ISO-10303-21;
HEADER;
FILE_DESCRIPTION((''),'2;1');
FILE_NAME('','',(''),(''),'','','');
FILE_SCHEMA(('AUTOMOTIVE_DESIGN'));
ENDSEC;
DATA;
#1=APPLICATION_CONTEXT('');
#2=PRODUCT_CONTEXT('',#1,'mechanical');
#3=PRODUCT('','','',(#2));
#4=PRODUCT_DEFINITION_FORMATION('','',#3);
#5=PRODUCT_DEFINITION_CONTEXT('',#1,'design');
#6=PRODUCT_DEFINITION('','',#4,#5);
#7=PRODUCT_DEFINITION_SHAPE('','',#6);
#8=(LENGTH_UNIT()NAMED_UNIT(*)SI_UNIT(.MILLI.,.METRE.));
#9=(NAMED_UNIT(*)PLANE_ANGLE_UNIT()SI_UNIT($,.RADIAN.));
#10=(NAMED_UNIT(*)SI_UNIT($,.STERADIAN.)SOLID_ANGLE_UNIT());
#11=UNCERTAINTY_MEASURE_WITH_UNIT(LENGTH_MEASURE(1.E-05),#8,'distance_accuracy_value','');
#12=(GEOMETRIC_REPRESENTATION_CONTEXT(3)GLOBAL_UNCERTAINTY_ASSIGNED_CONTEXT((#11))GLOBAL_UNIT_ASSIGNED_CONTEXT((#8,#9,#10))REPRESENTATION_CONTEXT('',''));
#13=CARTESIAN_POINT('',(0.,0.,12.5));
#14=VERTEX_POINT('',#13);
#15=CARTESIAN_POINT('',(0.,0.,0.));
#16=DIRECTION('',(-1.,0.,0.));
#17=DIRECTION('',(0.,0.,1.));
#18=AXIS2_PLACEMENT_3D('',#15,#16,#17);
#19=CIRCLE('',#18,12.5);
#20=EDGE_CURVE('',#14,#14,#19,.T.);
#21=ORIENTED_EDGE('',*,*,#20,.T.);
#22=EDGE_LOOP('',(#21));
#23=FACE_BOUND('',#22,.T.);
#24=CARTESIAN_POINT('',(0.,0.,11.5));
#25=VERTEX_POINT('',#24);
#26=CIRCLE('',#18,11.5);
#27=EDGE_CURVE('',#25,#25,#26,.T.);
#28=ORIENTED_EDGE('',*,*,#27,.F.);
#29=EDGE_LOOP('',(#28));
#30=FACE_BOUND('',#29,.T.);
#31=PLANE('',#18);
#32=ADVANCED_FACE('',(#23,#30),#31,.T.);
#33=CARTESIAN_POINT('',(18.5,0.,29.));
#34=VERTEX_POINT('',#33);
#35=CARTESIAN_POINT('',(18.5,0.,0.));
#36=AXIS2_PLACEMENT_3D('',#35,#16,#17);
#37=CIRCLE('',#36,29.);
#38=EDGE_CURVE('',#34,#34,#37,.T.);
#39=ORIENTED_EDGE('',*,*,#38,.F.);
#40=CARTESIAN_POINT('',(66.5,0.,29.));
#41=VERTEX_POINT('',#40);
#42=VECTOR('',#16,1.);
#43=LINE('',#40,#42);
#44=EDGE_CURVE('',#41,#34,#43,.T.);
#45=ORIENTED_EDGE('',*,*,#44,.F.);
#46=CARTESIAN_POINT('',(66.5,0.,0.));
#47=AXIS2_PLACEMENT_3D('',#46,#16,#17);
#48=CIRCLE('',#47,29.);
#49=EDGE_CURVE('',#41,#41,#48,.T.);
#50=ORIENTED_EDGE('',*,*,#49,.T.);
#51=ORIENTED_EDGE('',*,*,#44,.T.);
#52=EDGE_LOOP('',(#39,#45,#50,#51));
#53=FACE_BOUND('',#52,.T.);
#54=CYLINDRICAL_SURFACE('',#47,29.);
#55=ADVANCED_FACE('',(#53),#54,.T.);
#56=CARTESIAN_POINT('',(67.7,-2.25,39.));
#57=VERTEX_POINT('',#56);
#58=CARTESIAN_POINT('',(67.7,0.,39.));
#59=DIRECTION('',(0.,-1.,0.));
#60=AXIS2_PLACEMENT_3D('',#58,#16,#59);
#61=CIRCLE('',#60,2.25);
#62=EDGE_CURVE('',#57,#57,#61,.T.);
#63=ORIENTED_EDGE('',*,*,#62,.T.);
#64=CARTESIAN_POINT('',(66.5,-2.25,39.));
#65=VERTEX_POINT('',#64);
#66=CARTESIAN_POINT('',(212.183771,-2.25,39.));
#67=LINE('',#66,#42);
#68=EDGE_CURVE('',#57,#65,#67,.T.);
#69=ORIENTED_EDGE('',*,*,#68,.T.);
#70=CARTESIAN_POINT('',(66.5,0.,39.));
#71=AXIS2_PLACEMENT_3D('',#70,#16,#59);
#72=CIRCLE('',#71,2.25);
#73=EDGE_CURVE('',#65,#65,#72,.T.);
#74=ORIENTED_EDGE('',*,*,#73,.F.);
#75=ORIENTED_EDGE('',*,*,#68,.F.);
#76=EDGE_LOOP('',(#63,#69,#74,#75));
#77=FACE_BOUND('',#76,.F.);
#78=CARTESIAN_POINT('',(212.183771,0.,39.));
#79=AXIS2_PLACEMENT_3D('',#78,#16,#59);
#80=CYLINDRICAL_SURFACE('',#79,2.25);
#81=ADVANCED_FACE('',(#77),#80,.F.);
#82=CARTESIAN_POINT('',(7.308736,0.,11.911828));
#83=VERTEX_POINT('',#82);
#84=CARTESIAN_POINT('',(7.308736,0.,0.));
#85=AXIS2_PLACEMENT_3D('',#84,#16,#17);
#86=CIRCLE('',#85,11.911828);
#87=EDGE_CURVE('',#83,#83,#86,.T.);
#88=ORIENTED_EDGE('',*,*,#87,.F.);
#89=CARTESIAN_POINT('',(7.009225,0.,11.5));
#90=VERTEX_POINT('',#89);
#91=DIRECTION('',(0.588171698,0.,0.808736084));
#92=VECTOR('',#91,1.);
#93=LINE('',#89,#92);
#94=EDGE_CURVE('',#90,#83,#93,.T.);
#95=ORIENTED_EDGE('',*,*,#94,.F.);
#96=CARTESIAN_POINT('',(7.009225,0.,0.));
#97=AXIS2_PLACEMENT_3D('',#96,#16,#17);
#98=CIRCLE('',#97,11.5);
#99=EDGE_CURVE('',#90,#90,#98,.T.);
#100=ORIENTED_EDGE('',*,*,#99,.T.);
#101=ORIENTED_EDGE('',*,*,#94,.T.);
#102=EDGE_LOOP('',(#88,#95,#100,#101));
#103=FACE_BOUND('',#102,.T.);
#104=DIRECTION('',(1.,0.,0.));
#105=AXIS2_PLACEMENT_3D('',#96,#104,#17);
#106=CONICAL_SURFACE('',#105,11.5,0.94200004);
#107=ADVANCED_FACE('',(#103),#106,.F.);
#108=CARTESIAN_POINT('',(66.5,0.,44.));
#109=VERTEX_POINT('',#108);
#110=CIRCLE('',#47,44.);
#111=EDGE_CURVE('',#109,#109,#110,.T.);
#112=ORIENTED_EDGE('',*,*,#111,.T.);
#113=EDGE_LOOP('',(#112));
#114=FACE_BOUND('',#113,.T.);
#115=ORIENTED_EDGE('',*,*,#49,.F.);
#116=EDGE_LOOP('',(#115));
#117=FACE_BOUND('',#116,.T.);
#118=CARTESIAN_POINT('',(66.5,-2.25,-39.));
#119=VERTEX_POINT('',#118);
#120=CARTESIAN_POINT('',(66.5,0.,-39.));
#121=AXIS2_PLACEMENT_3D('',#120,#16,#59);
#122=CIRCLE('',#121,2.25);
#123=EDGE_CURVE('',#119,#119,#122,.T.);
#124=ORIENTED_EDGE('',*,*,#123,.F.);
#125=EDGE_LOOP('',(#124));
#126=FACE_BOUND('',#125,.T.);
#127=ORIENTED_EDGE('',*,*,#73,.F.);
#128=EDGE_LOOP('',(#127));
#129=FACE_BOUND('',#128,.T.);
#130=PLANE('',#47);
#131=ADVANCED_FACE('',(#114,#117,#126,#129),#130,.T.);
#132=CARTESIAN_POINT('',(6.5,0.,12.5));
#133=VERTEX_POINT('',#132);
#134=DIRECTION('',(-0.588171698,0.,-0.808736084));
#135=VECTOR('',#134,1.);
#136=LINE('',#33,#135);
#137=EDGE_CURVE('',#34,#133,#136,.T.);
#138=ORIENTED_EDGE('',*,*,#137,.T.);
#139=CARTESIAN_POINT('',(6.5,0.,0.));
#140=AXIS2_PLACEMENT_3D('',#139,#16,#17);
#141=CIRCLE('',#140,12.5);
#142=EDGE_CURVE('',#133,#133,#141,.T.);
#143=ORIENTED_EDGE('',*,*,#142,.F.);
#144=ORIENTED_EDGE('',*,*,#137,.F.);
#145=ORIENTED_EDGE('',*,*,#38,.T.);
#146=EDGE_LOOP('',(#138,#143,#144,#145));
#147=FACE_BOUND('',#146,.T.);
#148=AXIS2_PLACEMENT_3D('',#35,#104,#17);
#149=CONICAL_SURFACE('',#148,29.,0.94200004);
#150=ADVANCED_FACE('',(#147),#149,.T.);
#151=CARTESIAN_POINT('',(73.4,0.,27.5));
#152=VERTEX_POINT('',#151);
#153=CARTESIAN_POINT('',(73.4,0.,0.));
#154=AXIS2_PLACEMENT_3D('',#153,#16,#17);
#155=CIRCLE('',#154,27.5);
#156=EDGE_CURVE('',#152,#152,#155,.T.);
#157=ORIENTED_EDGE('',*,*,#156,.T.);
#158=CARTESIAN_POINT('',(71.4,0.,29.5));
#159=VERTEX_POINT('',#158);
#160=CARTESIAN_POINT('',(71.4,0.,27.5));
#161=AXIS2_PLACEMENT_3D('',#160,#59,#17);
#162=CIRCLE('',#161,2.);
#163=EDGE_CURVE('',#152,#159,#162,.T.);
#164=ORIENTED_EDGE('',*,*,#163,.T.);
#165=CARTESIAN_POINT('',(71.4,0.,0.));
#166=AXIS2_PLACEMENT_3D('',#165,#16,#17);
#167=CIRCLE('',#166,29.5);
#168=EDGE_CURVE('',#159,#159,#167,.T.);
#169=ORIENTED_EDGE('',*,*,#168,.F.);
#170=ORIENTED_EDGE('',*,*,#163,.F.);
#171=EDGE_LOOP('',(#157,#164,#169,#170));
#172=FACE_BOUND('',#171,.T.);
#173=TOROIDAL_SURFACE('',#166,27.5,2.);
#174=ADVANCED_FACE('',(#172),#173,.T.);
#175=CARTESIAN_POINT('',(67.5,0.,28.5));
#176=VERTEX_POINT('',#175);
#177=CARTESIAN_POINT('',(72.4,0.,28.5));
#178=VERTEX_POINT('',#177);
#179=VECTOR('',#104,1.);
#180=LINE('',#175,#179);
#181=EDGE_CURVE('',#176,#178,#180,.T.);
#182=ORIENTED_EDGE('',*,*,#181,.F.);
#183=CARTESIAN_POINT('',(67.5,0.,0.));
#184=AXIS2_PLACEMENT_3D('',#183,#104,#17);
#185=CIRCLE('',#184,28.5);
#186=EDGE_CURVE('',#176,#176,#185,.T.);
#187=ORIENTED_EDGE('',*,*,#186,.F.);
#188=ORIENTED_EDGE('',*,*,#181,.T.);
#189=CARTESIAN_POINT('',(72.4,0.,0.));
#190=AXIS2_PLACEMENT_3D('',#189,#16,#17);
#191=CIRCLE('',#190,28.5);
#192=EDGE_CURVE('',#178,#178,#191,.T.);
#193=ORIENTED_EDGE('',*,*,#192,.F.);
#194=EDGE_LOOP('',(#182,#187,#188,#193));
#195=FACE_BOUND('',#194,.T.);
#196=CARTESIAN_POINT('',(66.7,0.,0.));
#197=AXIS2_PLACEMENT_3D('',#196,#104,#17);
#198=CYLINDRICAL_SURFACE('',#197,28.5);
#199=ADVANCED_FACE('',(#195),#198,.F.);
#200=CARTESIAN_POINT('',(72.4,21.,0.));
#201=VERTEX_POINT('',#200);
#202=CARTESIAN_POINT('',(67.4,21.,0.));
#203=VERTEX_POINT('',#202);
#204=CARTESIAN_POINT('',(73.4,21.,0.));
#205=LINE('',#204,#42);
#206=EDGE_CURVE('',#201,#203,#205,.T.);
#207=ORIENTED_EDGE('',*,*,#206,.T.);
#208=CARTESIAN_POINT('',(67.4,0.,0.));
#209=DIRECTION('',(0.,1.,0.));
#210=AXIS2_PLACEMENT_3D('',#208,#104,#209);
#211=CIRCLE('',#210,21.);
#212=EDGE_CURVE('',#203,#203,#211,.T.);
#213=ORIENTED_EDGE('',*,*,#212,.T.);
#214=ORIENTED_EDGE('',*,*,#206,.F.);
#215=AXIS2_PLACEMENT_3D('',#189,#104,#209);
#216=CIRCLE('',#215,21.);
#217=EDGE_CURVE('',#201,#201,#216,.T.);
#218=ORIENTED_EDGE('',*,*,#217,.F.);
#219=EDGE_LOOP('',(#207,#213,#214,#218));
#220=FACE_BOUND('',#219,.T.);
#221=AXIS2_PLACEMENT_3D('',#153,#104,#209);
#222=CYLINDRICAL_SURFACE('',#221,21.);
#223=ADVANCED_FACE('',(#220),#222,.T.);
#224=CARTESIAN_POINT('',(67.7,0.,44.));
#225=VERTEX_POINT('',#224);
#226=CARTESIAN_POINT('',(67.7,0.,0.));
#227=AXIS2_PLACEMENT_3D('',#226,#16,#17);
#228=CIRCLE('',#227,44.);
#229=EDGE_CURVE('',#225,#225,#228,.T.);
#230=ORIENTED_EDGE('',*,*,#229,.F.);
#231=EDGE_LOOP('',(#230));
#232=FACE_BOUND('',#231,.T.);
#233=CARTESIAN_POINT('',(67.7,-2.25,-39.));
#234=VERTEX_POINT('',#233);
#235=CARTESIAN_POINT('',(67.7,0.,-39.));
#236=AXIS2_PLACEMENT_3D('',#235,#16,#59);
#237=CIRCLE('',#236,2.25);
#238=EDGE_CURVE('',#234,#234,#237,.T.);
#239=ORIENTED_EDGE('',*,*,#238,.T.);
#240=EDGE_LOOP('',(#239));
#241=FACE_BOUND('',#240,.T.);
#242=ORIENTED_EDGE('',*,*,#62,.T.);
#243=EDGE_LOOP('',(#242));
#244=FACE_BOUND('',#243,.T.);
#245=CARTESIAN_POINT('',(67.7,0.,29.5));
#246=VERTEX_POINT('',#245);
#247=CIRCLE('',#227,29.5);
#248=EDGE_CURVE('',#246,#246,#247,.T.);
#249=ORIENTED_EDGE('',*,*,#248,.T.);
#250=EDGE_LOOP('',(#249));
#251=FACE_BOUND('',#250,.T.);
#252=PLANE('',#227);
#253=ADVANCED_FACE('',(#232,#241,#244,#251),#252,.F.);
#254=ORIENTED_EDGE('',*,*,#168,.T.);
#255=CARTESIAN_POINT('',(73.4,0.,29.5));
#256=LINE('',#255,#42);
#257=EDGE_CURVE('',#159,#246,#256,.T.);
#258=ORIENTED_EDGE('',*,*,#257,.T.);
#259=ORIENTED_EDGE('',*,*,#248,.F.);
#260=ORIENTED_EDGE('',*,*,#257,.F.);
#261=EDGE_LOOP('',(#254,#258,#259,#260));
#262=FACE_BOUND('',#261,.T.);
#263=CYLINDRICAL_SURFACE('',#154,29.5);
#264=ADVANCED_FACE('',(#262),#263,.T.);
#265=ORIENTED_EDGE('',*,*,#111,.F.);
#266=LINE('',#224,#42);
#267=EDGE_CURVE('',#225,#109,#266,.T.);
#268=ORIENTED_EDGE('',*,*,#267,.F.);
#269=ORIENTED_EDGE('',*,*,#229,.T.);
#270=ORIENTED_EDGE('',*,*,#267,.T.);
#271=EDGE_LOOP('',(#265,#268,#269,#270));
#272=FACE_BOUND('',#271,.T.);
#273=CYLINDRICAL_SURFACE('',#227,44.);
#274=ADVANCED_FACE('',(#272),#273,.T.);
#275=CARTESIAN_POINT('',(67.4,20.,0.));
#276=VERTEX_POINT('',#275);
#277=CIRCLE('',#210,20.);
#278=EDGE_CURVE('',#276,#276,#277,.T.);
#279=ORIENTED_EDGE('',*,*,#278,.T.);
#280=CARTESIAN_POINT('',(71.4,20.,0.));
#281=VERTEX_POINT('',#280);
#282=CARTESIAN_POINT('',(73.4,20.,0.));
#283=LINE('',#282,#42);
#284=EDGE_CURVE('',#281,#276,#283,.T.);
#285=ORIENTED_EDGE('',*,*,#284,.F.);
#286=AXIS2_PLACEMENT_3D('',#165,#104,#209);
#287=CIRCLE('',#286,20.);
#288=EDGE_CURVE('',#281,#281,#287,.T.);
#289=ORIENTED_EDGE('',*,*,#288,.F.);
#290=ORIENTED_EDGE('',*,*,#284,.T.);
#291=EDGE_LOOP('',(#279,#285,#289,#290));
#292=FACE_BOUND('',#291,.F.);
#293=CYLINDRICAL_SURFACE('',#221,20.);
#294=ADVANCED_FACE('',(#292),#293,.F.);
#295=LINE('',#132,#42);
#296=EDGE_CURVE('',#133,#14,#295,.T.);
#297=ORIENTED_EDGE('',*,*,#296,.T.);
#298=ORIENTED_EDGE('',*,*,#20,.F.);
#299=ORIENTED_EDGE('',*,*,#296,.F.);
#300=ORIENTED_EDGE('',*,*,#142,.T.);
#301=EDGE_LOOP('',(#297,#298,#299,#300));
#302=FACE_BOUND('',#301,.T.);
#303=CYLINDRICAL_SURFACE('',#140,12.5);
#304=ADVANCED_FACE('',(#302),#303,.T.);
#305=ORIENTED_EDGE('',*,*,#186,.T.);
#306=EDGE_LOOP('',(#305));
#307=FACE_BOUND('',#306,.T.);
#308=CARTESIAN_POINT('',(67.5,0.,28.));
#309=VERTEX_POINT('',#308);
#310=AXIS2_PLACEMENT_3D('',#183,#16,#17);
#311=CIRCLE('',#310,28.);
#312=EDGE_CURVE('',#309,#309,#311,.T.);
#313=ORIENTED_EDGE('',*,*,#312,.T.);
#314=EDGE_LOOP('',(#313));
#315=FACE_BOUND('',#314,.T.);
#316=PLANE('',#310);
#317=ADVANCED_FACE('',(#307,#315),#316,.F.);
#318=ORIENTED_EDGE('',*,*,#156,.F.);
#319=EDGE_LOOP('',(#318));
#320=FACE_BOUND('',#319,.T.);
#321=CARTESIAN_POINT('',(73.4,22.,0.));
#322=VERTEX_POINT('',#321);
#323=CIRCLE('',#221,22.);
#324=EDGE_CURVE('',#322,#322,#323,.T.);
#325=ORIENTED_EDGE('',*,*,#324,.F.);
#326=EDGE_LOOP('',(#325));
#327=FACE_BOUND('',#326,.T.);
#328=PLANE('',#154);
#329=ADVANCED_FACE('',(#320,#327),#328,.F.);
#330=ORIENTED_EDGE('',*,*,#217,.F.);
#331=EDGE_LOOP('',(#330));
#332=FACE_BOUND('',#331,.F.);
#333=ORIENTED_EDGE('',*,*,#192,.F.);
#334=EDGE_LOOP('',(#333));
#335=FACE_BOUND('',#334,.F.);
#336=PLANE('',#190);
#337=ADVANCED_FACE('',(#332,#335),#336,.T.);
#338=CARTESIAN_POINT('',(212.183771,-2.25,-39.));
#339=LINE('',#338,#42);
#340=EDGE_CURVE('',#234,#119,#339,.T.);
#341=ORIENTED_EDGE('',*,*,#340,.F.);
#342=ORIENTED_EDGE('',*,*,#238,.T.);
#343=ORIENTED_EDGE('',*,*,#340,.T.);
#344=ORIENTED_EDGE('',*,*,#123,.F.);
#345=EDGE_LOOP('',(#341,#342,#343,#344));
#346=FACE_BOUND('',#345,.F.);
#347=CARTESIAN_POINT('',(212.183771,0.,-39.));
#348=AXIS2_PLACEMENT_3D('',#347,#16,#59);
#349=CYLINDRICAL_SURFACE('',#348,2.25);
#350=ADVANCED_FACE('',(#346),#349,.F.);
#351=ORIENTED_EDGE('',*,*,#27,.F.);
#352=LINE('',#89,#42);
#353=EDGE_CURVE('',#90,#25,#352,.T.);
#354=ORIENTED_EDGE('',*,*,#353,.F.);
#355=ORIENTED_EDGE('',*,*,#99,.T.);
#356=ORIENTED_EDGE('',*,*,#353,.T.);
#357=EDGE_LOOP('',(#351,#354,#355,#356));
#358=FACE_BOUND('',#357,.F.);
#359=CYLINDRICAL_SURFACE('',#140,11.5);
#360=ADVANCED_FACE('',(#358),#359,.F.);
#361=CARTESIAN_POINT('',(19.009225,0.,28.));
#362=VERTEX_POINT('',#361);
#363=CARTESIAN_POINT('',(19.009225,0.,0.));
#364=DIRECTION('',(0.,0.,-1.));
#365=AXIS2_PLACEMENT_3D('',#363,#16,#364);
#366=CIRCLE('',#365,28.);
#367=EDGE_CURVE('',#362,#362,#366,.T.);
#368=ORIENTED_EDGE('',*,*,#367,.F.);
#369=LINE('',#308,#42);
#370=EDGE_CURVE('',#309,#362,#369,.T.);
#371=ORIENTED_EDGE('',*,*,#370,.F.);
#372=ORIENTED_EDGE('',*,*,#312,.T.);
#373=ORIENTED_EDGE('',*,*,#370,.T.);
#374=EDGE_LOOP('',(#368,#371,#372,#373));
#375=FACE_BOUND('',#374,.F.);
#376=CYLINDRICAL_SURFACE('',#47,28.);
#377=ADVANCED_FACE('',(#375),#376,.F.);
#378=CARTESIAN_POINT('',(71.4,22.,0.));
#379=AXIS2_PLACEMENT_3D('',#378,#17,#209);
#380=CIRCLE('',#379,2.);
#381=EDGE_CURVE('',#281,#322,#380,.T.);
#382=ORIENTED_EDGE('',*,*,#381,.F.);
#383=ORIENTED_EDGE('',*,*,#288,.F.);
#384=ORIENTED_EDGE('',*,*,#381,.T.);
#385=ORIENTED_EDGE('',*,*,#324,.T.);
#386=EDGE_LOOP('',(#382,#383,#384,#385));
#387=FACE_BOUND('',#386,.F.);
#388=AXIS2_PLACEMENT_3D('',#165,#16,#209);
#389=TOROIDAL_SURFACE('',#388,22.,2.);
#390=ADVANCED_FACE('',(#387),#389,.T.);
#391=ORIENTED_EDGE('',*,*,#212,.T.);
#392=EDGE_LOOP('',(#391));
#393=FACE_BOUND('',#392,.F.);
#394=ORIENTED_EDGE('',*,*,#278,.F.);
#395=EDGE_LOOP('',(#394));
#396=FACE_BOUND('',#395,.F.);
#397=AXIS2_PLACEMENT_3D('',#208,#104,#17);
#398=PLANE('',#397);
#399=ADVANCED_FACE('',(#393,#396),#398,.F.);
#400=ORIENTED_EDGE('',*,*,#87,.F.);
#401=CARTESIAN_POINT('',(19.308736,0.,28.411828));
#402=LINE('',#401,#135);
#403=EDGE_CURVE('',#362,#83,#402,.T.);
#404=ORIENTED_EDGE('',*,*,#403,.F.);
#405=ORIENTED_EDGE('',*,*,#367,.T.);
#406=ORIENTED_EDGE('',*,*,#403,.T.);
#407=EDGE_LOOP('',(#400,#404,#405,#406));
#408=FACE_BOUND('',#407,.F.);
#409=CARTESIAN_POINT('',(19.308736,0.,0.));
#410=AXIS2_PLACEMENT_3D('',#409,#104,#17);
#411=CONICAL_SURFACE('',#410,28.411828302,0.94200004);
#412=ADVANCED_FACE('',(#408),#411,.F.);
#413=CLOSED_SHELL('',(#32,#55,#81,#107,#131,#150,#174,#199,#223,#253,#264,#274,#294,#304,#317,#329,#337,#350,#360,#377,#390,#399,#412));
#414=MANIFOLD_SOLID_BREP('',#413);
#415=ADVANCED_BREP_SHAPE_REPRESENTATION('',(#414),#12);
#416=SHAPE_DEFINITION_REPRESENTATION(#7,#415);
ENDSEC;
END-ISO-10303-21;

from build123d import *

# Parameters (mm, degrees)
F2_R     = 20
F3_DEPTH = 6
F4_T     = 1
F5_R     = 2
F7_D     = 4.5


# Not quite as in the source:
# - a shell that OpenCascade refuses in one call is made with other operations: the cavity is built on its own and cut out


with BuildPart() as f1:
    # F0 (on Front) → F1 (revolve)
    with BuildSketch(Plane.XZ):
        Polygon((0, 12.5), (0, 0), (73.4, 0), (73.4, 29.5), (67.7, 29.5), (67.7, 44), (66.5, 44), (66.5, 29), (18.5, 29), (6.5, 12.5), align=None)
    revolve(axis=Axis((36.7, 0, 0), (-1, 0, 0)))

    # F2 (on face) → F3 (cut)
    with BuildSketch(Plane.YZ.offset(73.4)):
        Circle(F2_R)
    extrude(amount=-F3_DEPTH, mode=Mode.SUBTRACT)

    # F4: shell of thickness 1, made by hand


with BuildPart() as f4_core1:
    # F4_t2: copy of F1
    add(f1.part)

    # the walls: a layer under each face that stays
    f4_faces = [f4_core1.faces().sort_by_distance(p)[0] for p in [
        (3.25, 0, -12.5),
        (12.5, 0, -20.75),
        (42.5, 0, -29),
        (66.5, -29.3333333333, -29.3333333333),
        (67.1, 0, -44),
        (67.7, -29.3333333333, 29.3333333333),
        (70.55, 0, -29.5),
        (73.4, -19.6666666667, 19.6666666667),
        (70.4, -20, 0),
    ]]
    thicken(f4_faces, amount=-F4_T, mode=Mode.SUBTRACT)

    # F4_s3 → F4_t4 (revolve, cut)
    with BuildSketch(Plane.XZ):
        Polygon((6.4919126392, 12.515881717), (6.5, 11.5), (7.0092245917, 11.5), (7.3087360843, 11.9118283023), align=None)
    revolve(axis=Axis((6.5, 0, 0), (-1, 0, 0)), mode=Mode.SUBTRACT)

    # F4_s5 → F4_t6 (revolve, cut)
    with BuildSketch(Plane.XZ):
        Polygon((66.49, 29.01), (66.5, 28), (67.5, 28), (67.5, 29), align=None)
    revolve(axis=Axis((66.5, 0, 0), (-1, 0, 0)), mode=Mode.SUBTRACT)

    # F4_s7 → F4_t8 (revolve, cut)
    with BuildSketch(Plane.XZ):
        Polygon((67.71, 29.51), (66.7, 29.5), (66.7, 28.5), (67.7, 28.5), align=None)
    revolve(axis=Axis((67.7, 0, 0), (-1, 0, 0)), mode=Mode.SUBTRACT)


with BuildPart() as f1_1:
    add(f1.part)

    # what is left inside the walls is the cavity
    f4_cavity = [f4_core1.part.solids().sort_by_distance(p)[0] for p in [
        (50.669742, 0, -27.99),
    ]]
    add(f4_cavity, mode=Mode.SUBTRACT)

    # F5
    f5_edges = [f1_1.edges().sort_by_distance(p)[0] for p in [
        (73.4, 0, -29.5),
        (73.4, -20, 0),
    ]]
    fillet(f5_edges, radius=F5_R)

    # F7 (through all)
    with Locations(Plane.YZ.offset(67.7)):
        with Locations((0, 39), (0, -39)):
            Hole(F7_D / 2)


solid = f1_1.part
